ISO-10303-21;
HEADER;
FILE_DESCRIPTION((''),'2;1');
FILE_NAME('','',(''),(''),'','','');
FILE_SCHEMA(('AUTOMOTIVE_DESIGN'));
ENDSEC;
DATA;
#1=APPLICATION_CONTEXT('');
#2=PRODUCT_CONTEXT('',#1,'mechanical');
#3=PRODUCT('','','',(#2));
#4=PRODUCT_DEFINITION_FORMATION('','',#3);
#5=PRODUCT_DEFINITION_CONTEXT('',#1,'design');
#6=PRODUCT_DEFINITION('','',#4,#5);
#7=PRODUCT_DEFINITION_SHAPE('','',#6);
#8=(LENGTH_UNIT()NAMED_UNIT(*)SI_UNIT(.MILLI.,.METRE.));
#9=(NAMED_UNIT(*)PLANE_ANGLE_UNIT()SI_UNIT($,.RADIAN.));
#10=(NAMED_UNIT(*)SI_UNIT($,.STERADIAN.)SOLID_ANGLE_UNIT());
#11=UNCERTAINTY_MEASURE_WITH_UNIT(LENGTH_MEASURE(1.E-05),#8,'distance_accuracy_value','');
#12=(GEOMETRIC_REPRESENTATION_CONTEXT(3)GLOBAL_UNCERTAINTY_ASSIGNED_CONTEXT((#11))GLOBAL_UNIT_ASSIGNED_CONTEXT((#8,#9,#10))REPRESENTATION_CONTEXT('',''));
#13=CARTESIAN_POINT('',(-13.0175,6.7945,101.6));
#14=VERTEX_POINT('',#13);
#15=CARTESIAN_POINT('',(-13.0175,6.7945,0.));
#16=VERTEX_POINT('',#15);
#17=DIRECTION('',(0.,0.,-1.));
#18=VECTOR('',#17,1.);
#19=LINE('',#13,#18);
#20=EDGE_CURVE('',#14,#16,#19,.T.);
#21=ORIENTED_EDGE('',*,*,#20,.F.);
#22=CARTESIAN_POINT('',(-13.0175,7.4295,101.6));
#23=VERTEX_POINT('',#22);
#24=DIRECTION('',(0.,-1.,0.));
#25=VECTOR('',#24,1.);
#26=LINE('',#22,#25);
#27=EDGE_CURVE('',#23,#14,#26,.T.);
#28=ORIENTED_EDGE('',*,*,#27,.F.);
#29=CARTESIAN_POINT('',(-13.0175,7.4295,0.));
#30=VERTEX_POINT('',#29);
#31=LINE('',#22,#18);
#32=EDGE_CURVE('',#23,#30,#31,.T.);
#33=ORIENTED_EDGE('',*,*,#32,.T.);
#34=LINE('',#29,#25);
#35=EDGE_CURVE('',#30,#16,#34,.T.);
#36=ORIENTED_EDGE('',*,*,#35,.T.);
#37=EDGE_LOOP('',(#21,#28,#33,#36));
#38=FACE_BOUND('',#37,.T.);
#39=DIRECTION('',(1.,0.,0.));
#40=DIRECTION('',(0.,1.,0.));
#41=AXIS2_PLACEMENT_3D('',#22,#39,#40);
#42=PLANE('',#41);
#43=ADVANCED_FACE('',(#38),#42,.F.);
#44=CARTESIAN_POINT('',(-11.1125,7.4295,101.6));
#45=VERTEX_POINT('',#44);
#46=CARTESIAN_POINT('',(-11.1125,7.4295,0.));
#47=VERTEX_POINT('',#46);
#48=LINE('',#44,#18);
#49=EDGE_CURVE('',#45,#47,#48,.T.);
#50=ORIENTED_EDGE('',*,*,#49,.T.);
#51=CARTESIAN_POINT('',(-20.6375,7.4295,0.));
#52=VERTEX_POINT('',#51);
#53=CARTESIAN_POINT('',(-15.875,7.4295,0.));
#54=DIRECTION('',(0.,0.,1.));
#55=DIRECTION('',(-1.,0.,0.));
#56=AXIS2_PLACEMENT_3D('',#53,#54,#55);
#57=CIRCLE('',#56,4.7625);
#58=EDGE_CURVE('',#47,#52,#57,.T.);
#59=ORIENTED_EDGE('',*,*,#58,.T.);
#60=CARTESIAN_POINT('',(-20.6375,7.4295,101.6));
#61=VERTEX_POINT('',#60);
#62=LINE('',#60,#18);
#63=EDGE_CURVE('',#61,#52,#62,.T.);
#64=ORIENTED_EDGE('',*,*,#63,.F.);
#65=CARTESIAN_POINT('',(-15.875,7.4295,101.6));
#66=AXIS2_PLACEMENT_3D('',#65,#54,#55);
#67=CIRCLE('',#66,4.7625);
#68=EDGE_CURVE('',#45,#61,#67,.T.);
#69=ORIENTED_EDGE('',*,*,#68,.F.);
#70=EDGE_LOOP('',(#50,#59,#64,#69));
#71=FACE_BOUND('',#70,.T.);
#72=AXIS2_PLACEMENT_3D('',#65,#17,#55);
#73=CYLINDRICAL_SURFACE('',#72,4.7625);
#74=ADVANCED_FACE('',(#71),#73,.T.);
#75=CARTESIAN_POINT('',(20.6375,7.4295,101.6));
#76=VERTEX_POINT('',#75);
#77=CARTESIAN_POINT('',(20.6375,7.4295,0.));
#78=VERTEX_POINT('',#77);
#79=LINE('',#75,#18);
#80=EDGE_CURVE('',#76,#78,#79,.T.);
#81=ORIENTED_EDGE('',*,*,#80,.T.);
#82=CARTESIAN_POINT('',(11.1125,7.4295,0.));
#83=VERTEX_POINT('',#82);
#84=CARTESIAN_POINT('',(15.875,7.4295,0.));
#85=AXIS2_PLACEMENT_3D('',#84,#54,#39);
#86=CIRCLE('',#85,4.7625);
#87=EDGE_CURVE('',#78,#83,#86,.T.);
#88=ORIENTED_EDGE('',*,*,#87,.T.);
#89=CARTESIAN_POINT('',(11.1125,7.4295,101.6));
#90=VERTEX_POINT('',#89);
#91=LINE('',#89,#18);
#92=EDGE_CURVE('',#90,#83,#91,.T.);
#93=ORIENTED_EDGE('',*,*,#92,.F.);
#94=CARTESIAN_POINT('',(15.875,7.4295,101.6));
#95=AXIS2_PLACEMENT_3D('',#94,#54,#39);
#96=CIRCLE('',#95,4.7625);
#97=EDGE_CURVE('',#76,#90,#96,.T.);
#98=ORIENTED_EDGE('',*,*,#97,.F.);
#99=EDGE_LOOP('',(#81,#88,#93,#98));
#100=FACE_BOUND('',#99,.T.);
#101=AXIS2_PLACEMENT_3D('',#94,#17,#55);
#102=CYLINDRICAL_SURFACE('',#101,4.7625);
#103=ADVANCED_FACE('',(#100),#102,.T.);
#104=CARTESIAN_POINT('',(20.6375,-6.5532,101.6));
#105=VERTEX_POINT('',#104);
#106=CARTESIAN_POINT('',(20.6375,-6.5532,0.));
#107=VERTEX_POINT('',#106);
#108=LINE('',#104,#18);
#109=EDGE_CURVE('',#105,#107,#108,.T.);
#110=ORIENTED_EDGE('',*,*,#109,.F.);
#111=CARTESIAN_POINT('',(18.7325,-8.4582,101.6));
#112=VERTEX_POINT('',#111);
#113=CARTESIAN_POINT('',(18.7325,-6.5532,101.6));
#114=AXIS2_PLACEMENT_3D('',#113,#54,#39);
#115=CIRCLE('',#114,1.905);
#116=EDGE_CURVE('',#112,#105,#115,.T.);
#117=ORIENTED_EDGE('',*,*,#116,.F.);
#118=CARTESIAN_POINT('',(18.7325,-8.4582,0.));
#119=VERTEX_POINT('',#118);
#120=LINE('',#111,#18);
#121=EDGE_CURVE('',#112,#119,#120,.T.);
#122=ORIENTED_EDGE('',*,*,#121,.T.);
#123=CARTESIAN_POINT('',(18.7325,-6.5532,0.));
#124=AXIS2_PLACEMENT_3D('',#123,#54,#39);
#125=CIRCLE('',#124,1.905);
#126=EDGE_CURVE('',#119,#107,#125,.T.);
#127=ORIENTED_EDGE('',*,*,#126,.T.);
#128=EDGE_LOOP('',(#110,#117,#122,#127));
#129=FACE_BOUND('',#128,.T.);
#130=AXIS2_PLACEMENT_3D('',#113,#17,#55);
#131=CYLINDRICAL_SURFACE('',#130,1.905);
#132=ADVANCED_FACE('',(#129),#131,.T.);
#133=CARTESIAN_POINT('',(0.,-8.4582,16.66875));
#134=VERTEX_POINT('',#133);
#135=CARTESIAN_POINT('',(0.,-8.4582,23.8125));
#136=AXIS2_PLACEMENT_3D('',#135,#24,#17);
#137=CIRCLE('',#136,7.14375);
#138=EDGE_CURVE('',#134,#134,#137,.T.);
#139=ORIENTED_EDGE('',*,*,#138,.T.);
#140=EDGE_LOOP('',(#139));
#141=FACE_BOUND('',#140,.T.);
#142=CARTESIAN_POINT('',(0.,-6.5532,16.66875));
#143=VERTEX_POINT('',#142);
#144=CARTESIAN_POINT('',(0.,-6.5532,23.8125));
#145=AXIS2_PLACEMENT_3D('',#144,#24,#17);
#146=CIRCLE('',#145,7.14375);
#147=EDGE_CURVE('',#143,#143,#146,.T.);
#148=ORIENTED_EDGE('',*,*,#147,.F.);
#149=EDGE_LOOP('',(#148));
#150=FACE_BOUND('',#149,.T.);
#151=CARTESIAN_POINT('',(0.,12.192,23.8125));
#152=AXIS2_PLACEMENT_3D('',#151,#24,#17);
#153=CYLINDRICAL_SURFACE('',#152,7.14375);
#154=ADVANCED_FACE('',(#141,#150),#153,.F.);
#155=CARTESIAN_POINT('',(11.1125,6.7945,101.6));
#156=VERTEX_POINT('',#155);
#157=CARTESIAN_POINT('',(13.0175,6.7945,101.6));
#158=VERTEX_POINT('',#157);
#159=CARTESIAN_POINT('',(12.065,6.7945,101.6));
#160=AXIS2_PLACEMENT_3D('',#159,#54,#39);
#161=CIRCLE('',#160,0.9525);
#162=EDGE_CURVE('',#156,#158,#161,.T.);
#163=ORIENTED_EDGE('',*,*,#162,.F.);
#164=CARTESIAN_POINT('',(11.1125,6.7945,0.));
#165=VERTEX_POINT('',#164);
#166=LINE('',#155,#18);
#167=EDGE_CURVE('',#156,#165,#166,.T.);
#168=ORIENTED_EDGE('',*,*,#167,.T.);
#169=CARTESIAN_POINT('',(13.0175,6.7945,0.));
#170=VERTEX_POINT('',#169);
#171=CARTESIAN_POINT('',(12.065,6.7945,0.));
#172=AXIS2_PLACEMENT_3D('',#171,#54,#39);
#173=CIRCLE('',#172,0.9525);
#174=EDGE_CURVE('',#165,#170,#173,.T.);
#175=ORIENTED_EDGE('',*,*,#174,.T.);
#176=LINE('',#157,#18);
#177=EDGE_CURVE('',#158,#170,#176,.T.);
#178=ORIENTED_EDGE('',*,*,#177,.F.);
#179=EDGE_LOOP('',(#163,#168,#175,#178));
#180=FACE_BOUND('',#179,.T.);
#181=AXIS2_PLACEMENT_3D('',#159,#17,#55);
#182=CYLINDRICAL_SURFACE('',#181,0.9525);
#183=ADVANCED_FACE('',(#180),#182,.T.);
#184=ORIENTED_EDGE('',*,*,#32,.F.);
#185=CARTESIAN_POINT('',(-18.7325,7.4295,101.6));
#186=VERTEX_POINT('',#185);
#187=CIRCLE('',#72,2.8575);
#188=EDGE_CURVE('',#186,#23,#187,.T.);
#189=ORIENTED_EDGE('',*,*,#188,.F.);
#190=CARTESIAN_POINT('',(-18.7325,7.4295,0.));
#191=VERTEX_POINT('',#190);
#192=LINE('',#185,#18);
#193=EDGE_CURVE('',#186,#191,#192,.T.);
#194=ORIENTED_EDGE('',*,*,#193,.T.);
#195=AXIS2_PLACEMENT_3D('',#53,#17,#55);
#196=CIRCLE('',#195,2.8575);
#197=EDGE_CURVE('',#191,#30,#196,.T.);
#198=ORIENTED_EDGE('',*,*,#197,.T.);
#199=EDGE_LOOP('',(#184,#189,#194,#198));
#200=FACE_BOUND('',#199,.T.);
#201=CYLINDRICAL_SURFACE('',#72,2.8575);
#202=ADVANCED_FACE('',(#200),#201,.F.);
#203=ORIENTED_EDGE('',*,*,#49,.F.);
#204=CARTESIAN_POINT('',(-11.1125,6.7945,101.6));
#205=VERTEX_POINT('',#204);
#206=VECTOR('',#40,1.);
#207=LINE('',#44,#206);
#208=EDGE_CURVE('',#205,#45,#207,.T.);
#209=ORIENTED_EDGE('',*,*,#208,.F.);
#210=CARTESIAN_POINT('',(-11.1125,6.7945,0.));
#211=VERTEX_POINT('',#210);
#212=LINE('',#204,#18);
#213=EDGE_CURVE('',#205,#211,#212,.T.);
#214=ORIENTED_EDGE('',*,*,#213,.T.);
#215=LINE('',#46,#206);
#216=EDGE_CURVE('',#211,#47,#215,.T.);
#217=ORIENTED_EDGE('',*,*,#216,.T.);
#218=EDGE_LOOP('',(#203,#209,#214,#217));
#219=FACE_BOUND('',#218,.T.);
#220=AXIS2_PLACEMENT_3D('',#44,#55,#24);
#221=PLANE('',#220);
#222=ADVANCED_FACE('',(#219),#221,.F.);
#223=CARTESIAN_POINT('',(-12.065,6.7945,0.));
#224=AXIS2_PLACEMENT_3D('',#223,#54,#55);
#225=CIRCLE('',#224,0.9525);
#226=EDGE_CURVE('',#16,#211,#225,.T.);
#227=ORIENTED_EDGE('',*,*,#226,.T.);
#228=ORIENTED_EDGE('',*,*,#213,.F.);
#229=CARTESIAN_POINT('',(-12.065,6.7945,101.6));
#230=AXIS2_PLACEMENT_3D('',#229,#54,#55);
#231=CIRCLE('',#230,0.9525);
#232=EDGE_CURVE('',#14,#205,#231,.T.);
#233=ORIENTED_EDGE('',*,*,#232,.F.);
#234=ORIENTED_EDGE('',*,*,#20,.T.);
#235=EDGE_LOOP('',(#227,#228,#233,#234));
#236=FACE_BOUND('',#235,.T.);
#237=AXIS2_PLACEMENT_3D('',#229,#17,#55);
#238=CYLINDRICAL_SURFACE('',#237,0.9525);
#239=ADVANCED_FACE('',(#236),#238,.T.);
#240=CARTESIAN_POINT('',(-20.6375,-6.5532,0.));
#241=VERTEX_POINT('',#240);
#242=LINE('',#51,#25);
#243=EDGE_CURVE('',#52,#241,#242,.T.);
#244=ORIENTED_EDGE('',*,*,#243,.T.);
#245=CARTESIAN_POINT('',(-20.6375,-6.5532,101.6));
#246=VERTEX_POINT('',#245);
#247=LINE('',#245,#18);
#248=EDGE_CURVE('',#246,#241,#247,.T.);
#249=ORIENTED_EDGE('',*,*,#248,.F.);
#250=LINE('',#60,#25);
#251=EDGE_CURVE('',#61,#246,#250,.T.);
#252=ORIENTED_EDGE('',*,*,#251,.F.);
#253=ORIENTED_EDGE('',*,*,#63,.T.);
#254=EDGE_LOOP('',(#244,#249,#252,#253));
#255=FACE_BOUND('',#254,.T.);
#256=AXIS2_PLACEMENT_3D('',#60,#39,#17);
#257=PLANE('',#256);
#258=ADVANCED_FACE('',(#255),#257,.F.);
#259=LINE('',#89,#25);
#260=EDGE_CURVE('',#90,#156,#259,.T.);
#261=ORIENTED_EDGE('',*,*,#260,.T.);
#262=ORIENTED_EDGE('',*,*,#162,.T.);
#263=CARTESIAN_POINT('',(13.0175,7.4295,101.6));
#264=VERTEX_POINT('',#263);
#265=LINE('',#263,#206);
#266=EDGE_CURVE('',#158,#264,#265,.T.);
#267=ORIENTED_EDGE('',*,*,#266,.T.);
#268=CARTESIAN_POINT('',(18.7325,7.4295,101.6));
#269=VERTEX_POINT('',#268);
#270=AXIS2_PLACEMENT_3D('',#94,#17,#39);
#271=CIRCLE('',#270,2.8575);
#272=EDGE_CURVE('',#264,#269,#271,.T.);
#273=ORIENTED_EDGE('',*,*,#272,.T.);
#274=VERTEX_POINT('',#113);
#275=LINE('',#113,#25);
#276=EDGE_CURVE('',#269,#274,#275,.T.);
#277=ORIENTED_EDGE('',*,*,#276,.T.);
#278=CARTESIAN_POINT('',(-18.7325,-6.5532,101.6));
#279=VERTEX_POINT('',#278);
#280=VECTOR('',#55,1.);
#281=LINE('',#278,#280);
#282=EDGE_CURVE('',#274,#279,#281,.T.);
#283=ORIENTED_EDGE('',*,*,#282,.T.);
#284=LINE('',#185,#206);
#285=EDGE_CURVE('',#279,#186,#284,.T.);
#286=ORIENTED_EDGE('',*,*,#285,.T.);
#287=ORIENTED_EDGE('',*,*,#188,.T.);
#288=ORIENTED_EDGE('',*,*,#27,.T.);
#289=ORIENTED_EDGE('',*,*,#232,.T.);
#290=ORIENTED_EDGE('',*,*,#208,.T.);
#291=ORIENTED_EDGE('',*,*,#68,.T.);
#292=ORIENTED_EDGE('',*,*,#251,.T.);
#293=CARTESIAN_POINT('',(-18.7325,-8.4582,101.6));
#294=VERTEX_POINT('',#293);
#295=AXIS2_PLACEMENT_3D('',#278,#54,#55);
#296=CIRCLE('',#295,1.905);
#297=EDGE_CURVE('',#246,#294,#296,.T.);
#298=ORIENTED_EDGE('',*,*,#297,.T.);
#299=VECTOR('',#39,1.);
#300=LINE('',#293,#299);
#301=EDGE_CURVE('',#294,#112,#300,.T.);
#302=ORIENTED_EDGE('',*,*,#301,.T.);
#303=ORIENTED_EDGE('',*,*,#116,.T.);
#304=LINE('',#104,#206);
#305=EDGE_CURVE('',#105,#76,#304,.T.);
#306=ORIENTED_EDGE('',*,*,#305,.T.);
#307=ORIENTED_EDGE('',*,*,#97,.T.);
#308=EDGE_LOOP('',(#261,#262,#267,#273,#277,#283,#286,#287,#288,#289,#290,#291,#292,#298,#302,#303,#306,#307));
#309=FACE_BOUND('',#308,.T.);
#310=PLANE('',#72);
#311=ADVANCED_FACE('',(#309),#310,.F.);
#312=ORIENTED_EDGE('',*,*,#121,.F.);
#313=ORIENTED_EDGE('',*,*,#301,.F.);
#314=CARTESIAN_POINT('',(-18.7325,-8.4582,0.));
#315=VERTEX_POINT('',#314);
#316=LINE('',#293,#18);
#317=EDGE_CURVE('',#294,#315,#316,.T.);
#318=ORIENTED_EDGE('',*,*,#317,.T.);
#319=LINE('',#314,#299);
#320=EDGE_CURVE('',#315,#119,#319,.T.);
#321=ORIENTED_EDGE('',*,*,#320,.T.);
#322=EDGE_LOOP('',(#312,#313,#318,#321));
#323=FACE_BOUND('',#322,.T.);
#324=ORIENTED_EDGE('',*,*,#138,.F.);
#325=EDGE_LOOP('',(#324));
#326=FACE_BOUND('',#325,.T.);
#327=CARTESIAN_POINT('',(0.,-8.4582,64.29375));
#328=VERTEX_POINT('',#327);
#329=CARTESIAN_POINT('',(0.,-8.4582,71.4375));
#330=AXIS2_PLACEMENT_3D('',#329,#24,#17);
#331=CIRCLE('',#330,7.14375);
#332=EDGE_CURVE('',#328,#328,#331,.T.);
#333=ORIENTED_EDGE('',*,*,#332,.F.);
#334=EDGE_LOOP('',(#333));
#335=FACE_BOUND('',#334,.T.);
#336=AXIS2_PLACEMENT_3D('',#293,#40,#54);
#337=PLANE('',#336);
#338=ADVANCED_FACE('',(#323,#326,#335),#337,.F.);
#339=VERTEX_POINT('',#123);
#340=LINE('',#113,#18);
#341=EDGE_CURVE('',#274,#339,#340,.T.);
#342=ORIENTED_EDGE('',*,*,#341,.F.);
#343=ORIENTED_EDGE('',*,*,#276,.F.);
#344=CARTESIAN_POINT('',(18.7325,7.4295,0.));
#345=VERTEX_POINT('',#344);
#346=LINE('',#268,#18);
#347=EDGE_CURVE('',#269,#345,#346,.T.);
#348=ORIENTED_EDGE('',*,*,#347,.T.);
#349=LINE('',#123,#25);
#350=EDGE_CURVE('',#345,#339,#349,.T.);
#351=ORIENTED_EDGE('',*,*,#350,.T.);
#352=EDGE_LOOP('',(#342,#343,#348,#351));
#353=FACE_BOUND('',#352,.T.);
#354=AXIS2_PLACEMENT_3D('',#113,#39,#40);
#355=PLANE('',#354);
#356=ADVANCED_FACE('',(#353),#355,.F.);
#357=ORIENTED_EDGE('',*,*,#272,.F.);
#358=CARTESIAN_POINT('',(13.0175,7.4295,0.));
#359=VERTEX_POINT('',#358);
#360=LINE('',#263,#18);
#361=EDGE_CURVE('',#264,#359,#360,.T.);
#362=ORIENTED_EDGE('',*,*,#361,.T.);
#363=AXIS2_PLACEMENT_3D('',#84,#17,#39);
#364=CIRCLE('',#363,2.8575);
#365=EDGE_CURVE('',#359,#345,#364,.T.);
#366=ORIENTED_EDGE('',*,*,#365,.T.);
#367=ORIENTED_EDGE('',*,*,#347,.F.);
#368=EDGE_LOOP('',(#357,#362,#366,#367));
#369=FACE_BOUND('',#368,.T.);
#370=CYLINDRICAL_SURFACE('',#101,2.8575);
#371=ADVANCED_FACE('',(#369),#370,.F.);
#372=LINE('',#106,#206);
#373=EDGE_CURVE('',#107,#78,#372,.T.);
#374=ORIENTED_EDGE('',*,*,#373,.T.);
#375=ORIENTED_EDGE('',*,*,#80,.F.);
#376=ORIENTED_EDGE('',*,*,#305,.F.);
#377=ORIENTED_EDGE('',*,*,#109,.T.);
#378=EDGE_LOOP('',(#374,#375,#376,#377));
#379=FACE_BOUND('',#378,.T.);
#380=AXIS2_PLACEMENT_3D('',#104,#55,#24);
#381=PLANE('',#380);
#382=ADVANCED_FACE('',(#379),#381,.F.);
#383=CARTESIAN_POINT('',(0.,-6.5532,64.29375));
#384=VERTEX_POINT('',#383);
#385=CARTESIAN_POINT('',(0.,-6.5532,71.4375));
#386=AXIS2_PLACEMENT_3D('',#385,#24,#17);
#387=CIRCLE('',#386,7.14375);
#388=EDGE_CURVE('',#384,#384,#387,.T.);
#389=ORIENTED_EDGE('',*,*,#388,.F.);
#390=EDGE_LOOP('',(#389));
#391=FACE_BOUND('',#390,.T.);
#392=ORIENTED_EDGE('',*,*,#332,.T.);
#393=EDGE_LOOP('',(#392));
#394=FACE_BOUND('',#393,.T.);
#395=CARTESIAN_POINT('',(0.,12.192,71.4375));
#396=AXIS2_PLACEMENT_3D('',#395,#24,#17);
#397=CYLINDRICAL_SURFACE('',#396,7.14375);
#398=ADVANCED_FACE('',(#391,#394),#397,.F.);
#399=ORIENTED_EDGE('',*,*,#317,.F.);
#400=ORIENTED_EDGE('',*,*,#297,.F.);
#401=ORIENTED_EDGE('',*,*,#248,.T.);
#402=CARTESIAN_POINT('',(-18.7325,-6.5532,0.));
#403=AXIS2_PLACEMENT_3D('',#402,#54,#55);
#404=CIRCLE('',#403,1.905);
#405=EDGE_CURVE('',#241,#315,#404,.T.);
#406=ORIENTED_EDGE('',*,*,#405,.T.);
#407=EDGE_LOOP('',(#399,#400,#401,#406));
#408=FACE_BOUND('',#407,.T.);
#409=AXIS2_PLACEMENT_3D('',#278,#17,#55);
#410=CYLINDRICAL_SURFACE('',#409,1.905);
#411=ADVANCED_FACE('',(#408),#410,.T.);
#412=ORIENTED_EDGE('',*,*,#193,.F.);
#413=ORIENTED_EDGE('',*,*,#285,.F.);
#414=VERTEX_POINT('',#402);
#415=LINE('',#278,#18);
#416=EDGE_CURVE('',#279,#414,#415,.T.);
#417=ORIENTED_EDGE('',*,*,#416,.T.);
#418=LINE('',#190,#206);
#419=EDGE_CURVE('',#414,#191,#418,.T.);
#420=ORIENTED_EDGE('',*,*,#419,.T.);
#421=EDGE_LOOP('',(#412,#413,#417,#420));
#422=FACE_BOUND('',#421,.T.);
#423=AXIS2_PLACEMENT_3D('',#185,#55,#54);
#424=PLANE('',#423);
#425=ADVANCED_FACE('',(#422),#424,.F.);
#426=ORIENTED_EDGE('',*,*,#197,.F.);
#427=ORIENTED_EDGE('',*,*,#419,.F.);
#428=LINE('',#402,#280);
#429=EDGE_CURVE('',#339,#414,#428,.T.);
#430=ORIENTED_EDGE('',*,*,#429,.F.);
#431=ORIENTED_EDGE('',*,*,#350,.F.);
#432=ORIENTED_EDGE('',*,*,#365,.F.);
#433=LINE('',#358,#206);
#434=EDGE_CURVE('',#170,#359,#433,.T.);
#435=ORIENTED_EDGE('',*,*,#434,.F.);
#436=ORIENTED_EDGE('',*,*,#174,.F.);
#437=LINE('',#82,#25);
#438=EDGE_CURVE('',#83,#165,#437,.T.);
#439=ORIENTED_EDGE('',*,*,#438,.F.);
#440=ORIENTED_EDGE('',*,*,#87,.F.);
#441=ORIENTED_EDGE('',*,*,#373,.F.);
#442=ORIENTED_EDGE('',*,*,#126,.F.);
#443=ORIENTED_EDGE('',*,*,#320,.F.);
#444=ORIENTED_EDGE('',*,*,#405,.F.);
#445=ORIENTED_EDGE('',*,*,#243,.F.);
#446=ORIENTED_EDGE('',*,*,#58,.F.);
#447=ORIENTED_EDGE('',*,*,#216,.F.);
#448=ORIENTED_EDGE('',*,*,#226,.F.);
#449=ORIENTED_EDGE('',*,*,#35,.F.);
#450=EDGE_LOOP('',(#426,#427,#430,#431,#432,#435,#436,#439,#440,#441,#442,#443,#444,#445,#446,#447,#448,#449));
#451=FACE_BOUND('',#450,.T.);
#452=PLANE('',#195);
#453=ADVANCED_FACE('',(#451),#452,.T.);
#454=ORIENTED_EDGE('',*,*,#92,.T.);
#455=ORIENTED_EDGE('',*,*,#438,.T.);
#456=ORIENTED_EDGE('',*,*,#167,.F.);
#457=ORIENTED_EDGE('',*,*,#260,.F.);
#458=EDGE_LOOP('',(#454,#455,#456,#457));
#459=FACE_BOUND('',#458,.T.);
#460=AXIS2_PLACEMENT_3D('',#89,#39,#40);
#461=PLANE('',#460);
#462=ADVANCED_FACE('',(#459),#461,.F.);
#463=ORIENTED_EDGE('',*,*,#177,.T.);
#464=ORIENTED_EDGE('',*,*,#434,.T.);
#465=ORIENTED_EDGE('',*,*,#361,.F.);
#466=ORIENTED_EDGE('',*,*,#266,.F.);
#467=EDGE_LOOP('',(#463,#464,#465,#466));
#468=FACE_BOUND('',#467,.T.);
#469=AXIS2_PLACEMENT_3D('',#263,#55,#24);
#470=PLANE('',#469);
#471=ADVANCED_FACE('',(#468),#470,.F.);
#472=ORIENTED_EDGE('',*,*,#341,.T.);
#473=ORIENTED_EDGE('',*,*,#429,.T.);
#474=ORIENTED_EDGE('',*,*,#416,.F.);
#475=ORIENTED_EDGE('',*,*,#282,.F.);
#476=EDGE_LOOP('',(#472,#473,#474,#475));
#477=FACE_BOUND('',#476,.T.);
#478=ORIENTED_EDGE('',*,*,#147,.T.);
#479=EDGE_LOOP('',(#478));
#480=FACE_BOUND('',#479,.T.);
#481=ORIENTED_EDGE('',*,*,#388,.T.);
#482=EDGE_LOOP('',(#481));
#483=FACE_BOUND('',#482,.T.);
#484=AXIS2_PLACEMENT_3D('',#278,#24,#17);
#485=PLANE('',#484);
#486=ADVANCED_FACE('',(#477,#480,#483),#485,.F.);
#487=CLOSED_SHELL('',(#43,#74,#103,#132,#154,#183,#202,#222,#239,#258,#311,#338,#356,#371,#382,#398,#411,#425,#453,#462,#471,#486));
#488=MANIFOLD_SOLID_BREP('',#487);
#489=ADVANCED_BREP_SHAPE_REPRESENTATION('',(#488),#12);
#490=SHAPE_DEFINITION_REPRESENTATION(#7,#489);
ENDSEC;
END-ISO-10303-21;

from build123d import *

# Parameters (mm, degrees)
BASE_EXTRUDE_DEPTH = 101.6
HOLE1_START        = -8.4582
HOLE1_OUTLINE_R    = 7.14375
HOLE1_DEPTH        = 1.905
LPATTERN2_COUNT    = 2
LPATTERN2_PITCH    = 47.625


with BuildPart() as part:
    # Sketch1 → Base-Extrude (new body)
    with BuildSketch(Plane.XY):
        with BuildLine():
            Line((-20.6375, 7.4295), (-20.6375, -6.5532))
            ThreePointArc((-20.6375, -6.5532), (-20.079538418, -7.900238418), (-18.7325, -8.4582))
            Line((-18.7325, -8.4582), (18.7325, -8.4582))
            ThreePointArc((18.7325, -8.4582), (20.079538418, -7.900238418), (20.6375, -6.5532))
            Line((20.6375, -6.5532), (20.6375, 7.4295))
            ThreePointArc((20.6375, 7.4295), (15.875, 12.192), (11.1125, 7.4295))
            Line((11.1125, 7.4295), (11.1125, 6.7945))
            ThreePointArc((11.1125, 6.7945), (12.065, 5.842), (13.0175, 6.7945))
            Line((13.0175, 6.7945), (13.0175, 7.4295))
            ThreePointArc((13.0175, 7.4295), (15.875, 10.287), (18.7325, 7.4295))
            Line((18.7325, 7.4295), (18.7325, -6.5532))
            Line((18.7325, -6.5532), (-18.7325, -6.5532))
            Line((-18.7325, -6.5532), (-18.7325, 7.4295))
            ThreePointArc((-18.7325, 7.4295), (-15.875, 10.287), (-13.0175, 7.4295))
            Line((-13.0175, 7.4295), (-13.0175, 6.7945))
            ThreePointArc((-13.0175, 6.7945), (-12.065, 5.842), (-11.1125, 6.7945))
            Line((-11.1125, 6.7945), (-11.1125, 7.4295))
            ThreePointArc((-11.1125, 7.4295), (-15.875, 12.192), (-20.6375, 7.4295))
        make_face()
    extrude(amount=BASE_EXTRUDE_DEPTH)

    # Hole1: read off the stored shape, not the designer's step
    # Hole1 outline → Hole1 (cut)
    with BuildSketch(Plane(origin=(0, 0, 0), x_dir=(1, 0, 0), z_dir=(0, 1, 0)).offset(HOLE1_START)):
        with Locations((0, -23.8125)):
            Circle(HOLE1_OUTLINE_R)
    hole1 = extrude(amount=HOLE1_DEPTH, mode=Mode.SUBTRACT)

    # LPattern2: Hole1 ×2
    with Locations(*[(0, 0, i * LPATTERN2_PITCH) for i in range(1, LPATTERN2_COUNT)]):
        add(hole1, mode=Mode.SUBTRACT)


solid = part.part
